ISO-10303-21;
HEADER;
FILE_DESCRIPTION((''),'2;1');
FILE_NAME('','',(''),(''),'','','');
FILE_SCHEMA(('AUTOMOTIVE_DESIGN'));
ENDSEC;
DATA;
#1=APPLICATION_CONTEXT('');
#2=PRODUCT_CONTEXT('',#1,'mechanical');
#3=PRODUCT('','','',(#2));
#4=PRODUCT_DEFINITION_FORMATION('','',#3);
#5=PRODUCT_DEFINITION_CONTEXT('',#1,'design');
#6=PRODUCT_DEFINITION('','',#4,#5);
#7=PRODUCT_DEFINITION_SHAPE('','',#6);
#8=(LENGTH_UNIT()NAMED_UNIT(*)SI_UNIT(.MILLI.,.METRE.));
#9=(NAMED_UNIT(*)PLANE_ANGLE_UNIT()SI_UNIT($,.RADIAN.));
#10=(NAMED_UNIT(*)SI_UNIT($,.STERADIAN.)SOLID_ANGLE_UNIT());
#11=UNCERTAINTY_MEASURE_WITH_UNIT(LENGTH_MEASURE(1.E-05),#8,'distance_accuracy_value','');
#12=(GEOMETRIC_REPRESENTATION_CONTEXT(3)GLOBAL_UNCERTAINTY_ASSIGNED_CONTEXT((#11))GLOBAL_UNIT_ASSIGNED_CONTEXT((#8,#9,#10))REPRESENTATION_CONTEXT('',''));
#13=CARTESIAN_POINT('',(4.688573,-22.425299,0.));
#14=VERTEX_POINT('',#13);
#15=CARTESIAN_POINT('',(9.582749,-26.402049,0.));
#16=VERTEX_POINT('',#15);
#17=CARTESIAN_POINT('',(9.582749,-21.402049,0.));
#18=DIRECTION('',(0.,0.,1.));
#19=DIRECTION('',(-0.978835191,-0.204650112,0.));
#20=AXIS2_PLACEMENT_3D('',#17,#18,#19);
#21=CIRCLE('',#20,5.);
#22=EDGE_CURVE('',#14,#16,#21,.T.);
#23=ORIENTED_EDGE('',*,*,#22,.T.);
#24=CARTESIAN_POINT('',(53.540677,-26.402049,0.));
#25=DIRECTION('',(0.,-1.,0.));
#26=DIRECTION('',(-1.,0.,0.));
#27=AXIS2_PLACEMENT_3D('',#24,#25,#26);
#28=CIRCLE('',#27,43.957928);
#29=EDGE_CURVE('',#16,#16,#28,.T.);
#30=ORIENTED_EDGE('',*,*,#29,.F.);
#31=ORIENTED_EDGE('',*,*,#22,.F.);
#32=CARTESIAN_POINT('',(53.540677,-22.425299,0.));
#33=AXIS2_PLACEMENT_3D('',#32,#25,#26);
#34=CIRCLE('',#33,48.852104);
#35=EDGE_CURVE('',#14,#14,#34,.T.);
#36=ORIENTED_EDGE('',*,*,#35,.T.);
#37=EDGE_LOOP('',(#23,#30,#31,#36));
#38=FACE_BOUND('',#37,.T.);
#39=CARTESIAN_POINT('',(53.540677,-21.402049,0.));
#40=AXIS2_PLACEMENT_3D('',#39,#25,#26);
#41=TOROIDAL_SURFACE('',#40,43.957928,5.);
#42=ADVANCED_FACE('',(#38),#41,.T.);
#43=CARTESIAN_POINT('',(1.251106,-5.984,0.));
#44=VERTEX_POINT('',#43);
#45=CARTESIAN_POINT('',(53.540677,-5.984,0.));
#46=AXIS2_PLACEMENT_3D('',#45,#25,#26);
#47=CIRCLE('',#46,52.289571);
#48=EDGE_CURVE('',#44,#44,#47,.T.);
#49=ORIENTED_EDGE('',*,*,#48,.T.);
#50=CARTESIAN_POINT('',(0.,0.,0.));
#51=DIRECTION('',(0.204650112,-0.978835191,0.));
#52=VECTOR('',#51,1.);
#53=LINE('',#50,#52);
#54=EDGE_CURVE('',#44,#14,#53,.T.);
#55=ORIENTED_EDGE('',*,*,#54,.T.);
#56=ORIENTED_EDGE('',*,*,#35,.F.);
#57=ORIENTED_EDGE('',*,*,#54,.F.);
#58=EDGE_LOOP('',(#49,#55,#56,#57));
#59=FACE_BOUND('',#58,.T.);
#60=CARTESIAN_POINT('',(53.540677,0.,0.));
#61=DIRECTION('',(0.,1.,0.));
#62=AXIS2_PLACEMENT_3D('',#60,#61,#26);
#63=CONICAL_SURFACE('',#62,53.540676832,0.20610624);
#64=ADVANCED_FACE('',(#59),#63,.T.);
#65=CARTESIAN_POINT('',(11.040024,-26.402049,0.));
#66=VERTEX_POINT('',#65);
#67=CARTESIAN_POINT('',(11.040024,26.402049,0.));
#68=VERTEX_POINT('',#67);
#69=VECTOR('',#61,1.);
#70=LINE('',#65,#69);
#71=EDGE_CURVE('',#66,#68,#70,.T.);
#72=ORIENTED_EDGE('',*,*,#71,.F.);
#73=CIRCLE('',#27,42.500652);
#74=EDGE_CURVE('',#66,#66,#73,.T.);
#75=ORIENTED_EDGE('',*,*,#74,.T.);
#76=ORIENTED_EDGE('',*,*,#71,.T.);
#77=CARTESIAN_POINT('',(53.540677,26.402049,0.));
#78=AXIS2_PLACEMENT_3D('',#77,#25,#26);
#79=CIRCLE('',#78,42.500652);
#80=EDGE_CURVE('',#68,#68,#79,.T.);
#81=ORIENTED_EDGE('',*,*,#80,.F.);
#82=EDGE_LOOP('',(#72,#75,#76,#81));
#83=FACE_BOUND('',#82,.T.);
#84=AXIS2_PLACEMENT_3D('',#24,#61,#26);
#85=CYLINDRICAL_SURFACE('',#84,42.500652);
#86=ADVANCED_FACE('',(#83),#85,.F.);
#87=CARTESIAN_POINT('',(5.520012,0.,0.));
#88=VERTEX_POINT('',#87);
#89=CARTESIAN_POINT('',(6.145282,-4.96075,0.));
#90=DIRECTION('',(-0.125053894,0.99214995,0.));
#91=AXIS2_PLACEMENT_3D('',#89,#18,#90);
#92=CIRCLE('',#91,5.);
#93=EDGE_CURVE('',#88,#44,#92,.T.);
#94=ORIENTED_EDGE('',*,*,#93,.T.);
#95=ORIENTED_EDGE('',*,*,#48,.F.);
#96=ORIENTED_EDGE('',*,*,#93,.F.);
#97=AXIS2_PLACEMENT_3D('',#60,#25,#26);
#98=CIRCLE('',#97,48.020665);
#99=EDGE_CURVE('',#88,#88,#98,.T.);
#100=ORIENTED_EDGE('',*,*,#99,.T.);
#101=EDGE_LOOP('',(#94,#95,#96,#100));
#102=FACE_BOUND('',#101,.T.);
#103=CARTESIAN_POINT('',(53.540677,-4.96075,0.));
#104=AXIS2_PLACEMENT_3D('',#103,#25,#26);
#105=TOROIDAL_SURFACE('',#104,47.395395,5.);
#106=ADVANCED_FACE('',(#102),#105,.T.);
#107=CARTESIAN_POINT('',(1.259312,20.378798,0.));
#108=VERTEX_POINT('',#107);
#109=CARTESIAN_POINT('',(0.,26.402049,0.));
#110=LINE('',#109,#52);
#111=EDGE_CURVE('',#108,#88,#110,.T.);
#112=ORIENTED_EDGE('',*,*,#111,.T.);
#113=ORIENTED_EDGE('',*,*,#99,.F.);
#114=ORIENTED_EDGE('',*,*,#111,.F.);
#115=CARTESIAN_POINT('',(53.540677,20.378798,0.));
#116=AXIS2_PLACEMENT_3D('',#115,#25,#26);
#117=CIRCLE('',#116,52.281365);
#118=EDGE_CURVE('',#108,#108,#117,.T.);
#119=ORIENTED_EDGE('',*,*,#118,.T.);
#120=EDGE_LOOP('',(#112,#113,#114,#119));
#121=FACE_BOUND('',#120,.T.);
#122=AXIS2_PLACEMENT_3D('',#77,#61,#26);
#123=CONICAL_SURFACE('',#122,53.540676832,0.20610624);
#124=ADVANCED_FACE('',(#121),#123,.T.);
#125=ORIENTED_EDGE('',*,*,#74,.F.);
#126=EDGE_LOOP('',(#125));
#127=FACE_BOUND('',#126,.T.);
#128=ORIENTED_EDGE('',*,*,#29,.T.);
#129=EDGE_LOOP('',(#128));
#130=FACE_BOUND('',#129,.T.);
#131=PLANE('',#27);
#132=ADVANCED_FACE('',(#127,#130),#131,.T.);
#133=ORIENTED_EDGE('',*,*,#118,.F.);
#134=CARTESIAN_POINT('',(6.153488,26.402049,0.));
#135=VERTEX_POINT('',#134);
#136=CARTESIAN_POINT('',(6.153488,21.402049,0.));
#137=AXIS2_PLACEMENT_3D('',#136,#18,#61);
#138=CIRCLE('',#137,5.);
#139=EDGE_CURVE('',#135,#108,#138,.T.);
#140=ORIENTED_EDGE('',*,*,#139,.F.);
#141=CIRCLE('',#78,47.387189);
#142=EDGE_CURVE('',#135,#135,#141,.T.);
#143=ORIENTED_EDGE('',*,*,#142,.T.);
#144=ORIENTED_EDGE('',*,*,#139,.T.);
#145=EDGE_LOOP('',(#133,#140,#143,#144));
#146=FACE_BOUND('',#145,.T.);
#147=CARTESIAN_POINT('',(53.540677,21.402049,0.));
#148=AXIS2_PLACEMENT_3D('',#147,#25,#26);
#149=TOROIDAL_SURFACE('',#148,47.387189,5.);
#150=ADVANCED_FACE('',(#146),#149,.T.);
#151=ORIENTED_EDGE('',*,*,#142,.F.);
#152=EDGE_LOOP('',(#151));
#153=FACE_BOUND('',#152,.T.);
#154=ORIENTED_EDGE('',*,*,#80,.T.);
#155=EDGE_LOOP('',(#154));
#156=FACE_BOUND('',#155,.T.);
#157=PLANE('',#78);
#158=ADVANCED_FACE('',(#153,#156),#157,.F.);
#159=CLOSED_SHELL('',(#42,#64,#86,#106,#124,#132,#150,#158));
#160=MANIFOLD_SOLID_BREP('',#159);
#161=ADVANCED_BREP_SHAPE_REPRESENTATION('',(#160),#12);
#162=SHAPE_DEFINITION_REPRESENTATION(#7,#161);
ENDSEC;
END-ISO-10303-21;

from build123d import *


# Not quite as in the source:
# - a fillet or chamfer that OpenCascade refuses, or shapes differently, is made with other operations: its cross-section is extruded or revolved along the edge and cut away or added


with BuildPart() as f1:
    # F0 (on Top) → F1 (revolve)
    with BuildSketch(Plane.XY):
        Polygon((11.0400244594, -26.4020487666), (11.0400244594, 26.4020487666), (5.5200122297, 26.4020487666), (5.5200122297, 0), (5.5200122297, -26.4020487666), align=None)
        Polygon((0, 0), (5.5200122297, -26.4020487666), (5.5200122297, 0), align=None)
        Polygon((5.5200122297, 0), (5.5200122297, 26.4020487666), (0, 26.4020487666), align=None)
    revolve(axis=Axis((53.5406768322, 0, 0), (0, -1, 0)))

    # F2: fillet of radius 5 on 3 edges, made by hand

    # F2_s1 → F2_t2 (revolve, cut)
    with BuildSketch(Plane.XY):
        with BuildLine():
            ThreePointArc((6.1534879532, 26.4020487666), (2.2730077773, 24.5551224424), (1.2593119965, 20.3787982085))
            Line((1.2593119965, 20.3787982085), (0, 26.4020487666))
            Line((0, 26.4020487666), (6.1534879532, 26.4020487666))
        make_face()
    revolve(axis=Axis((53.5406768322, 26.4020487666, 0), (0, -1, 0)), mode=Mode.SUBTRACT)

    # F2_s3 → F2_t4 (revolve, cut)
    with BuildSketch(Plane.XY):
        with BuildLine():
            ThreePointArc((5.5200122297, 0), (2.0748843765, -2.0569822638), (1.2511057448, -5.9840003086))
            Line((1.2511057448, -5.9840003086), (0, 0))
            Line((0, 0), (5.5200122297, 0))
        make_face()
    revolve(axis=Axis((53.5406768322, 0, 0), (0, -1, 0)), mode=Mode.SUBTRACT)

    # F2_s5 → F2_t6 (revolve, cut)
    with BuildSketch(Plane.XY):
        with BuildLine():
            ThreePointArc((4.6885727551, -22.4252993247), (6.4296750361, -25.2825289425), (9.5827487118, -26.4020487666))
            Line((9.5827487118, -26.4020487666), (5.5200122297, -26.4020487666))
            Line((5.5200122297, -26.4020487666), (4.6885727551, -22.4252993247))
        make_face()
    revolve(axis=Axis((53.5406768322, -26.4020487666, 0), (0, -1, 0)), mode=Mode.SUBTRACT)


solid = f1.part
